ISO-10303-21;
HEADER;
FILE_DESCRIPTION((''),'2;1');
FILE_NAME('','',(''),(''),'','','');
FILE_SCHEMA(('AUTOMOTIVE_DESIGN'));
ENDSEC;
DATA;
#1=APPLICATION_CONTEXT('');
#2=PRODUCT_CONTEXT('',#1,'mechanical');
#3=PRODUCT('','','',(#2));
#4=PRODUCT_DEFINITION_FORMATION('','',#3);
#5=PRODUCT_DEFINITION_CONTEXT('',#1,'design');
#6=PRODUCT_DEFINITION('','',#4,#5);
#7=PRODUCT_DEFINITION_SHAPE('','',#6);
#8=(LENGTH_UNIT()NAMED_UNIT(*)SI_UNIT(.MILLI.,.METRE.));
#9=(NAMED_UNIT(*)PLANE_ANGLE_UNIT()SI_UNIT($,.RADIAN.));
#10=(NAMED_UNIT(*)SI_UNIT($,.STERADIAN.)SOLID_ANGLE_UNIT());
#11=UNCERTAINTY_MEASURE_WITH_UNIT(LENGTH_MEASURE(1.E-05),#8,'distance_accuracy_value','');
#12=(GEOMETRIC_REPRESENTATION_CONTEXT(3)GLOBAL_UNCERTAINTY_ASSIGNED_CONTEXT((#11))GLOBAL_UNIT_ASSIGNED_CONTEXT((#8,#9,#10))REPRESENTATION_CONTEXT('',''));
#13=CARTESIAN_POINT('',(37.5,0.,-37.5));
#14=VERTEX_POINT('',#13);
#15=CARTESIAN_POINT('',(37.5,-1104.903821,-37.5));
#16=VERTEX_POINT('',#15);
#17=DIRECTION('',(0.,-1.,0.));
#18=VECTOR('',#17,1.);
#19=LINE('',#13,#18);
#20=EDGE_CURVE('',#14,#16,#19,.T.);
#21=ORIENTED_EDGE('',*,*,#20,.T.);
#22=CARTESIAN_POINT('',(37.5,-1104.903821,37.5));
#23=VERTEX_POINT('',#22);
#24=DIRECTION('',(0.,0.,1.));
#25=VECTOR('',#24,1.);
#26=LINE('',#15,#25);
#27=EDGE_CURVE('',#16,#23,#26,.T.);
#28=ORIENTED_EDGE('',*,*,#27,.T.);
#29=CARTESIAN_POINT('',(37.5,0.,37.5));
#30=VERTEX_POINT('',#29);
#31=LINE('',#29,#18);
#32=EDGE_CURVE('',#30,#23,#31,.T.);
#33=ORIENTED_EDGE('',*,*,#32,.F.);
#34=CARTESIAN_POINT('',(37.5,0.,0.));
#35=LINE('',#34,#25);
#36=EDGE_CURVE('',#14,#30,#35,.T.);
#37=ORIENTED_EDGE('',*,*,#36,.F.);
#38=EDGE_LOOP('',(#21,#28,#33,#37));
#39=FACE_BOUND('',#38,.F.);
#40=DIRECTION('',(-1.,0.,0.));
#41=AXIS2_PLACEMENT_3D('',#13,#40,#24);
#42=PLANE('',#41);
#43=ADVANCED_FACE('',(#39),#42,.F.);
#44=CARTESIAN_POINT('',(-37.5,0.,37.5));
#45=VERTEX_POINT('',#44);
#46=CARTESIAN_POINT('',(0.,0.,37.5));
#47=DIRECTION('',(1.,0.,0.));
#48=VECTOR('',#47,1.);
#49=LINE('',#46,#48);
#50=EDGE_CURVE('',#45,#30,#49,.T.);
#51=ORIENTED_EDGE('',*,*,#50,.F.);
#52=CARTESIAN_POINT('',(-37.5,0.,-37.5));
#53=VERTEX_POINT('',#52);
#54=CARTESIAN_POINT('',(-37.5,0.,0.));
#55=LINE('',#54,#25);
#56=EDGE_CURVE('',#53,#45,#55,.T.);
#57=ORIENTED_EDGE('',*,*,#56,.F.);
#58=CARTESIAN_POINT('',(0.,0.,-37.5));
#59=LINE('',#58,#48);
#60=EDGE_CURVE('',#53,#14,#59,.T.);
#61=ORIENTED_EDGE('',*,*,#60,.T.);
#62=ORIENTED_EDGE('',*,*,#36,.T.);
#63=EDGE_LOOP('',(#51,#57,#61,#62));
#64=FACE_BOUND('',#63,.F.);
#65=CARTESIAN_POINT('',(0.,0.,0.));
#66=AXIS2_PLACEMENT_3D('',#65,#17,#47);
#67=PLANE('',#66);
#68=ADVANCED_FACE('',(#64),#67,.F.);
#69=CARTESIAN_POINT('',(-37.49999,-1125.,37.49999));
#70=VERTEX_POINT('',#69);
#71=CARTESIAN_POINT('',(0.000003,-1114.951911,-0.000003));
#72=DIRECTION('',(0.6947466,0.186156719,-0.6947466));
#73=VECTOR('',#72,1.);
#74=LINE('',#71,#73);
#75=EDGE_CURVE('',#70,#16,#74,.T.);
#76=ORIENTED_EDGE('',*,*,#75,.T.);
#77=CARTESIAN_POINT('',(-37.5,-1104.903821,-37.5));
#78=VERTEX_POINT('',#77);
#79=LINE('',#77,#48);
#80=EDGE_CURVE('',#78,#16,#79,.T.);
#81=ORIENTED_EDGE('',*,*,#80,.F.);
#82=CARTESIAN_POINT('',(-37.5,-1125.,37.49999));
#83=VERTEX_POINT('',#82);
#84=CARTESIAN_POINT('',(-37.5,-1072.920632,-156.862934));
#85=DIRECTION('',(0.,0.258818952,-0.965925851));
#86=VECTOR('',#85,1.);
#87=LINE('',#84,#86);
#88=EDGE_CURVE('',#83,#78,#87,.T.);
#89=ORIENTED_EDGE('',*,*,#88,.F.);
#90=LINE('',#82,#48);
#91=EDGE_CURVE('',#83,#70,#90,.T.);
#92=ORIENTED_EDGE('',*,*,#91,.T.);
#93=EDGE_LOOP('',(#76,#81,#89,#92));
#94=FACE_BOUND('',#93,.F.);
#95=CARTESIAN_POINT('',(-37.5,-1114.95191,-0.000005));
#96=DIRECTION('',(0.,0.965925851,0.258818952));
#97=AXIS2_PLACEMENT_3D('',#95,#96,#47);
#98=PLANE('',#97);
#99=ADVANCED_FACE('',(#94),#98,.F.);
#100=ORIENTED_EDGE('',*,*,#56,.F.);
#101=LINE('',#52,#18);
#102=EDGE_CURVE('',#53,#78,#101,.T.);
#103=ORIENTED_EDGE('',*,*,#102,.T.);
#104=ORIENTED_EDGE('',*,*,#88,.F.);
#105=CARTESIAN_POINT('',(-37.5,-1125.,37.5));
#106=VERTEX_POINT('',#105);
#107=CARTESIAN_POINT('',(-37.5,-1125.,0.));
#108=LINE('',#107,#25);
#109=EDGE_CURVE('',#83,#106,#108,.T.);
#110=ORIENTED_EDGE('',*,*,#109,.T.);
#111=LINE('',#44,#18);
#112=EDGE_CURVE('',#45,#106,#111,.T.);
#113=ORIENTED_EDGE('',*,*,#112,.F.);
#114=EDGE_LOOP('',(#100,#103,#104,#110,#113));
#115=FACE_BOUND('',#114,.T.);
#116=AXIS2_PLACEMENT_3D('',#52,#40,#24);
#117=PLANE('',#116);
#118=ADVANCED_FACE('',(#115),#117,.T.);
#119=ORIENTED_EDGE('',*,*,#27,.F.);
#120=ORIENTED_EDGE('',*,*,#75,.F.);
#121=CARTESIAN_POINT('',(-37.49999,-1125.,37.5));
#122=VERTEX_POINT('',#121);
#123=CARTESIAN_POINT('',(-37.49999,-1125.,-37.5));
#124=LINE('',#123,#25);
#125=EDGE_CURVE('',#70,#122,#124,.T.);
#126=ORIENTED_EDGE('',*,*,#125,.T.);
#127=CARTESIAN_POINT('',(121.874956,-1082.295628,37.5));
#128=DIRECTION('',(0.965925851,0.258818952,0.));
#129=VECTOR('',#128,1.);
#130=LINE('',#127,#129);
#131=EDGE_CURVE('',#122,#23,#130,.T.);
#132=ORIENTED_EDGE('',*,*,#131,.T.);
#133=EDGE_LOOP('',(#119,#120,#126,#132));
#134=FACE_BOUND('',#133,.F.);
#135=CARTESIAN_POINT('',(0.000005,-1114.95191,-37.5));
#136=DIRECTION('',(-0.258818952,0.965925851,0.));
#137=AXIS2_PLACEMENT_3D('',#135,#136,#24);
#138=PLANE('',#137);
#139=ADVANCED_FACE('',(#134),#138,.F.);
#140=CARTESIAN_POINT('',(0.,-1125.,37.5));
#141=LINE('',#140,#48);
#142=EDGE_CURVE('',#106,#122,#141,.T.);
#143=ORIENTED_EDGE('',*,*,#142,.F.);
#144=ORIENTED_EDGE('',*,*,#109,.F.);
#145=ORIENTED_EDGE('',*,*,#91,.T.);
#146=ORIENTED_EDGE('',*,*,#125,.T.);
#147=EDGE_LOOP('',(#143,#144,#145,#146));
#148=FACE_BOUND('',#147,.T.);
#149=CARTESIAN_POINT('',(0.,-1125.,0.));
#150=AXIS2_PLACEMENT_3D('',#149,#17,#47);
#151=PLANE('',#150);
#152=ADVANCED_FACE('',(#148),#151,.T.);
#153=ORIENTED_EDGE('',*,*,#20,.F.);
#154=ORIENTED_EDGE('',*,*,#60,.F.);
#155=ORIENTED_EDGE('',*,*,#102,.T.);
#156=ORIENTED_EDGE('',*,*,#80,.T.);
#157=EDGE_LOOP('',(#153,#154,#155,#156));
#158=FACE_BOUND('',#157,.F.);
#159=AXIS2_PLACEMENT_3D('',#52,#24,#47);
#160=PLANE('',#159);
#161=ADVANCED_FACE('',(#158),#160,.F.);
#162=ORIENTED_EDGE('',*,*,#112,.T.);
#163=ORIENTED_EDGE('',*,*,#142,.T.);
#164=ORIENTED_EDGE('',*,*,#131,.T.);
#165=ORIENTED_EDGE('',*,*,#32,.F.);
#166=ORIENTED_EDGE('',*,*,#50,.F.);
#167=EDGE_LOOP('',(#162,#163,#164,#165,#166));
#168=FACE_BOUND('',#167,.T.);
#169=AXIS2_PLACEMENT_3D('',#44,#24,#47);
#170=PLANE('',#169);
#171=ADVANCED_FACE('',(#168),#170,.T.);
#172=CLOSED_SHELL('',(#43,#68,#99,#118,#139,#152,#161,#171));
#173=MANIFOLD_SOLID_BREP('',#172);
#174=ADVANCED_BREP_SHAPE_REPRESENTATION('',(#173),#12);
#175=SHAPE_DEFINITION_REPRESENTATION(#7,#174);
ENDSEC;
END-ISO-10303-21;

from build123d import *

# Parameters (mm, degrees)
F0_W     = 75
F0_H     = 75
F1_DEPTH = 1125
F2_SIZE2 = 20.096179
F2_SIZE  = 74.99999


# Not quite as in the source:
# - a fillet or chamfer is up to 0.001 mm smaller than in the source, because OpenCascade refuses the exact size


with BuildPart() as f1:
    # F0 (on Front) → F1 (new body)
    with BuildSketch(Plane.XZ):
        Rectangle(F0_W, F0_H)
    extrude(amount=F1_DEPTH)

    # F2 (size 75 and 20.0961894323 in the source; OpenCascade refuses exactly that, so slightly less here)
    f2_edges = [f1.edges().sort_by_distance(p)[0] for p in [
        (37.5, -1125, 0),
        (0, -1125, -37.5),
    ]]
    f2_side = f1.faces().sort_by_distance((0, -1125, 0))[0]
    chamfer(f2_edges, length=F2_SIZE, length2=F2_SIZE2, reference=f2_side)


solid = f1.part
